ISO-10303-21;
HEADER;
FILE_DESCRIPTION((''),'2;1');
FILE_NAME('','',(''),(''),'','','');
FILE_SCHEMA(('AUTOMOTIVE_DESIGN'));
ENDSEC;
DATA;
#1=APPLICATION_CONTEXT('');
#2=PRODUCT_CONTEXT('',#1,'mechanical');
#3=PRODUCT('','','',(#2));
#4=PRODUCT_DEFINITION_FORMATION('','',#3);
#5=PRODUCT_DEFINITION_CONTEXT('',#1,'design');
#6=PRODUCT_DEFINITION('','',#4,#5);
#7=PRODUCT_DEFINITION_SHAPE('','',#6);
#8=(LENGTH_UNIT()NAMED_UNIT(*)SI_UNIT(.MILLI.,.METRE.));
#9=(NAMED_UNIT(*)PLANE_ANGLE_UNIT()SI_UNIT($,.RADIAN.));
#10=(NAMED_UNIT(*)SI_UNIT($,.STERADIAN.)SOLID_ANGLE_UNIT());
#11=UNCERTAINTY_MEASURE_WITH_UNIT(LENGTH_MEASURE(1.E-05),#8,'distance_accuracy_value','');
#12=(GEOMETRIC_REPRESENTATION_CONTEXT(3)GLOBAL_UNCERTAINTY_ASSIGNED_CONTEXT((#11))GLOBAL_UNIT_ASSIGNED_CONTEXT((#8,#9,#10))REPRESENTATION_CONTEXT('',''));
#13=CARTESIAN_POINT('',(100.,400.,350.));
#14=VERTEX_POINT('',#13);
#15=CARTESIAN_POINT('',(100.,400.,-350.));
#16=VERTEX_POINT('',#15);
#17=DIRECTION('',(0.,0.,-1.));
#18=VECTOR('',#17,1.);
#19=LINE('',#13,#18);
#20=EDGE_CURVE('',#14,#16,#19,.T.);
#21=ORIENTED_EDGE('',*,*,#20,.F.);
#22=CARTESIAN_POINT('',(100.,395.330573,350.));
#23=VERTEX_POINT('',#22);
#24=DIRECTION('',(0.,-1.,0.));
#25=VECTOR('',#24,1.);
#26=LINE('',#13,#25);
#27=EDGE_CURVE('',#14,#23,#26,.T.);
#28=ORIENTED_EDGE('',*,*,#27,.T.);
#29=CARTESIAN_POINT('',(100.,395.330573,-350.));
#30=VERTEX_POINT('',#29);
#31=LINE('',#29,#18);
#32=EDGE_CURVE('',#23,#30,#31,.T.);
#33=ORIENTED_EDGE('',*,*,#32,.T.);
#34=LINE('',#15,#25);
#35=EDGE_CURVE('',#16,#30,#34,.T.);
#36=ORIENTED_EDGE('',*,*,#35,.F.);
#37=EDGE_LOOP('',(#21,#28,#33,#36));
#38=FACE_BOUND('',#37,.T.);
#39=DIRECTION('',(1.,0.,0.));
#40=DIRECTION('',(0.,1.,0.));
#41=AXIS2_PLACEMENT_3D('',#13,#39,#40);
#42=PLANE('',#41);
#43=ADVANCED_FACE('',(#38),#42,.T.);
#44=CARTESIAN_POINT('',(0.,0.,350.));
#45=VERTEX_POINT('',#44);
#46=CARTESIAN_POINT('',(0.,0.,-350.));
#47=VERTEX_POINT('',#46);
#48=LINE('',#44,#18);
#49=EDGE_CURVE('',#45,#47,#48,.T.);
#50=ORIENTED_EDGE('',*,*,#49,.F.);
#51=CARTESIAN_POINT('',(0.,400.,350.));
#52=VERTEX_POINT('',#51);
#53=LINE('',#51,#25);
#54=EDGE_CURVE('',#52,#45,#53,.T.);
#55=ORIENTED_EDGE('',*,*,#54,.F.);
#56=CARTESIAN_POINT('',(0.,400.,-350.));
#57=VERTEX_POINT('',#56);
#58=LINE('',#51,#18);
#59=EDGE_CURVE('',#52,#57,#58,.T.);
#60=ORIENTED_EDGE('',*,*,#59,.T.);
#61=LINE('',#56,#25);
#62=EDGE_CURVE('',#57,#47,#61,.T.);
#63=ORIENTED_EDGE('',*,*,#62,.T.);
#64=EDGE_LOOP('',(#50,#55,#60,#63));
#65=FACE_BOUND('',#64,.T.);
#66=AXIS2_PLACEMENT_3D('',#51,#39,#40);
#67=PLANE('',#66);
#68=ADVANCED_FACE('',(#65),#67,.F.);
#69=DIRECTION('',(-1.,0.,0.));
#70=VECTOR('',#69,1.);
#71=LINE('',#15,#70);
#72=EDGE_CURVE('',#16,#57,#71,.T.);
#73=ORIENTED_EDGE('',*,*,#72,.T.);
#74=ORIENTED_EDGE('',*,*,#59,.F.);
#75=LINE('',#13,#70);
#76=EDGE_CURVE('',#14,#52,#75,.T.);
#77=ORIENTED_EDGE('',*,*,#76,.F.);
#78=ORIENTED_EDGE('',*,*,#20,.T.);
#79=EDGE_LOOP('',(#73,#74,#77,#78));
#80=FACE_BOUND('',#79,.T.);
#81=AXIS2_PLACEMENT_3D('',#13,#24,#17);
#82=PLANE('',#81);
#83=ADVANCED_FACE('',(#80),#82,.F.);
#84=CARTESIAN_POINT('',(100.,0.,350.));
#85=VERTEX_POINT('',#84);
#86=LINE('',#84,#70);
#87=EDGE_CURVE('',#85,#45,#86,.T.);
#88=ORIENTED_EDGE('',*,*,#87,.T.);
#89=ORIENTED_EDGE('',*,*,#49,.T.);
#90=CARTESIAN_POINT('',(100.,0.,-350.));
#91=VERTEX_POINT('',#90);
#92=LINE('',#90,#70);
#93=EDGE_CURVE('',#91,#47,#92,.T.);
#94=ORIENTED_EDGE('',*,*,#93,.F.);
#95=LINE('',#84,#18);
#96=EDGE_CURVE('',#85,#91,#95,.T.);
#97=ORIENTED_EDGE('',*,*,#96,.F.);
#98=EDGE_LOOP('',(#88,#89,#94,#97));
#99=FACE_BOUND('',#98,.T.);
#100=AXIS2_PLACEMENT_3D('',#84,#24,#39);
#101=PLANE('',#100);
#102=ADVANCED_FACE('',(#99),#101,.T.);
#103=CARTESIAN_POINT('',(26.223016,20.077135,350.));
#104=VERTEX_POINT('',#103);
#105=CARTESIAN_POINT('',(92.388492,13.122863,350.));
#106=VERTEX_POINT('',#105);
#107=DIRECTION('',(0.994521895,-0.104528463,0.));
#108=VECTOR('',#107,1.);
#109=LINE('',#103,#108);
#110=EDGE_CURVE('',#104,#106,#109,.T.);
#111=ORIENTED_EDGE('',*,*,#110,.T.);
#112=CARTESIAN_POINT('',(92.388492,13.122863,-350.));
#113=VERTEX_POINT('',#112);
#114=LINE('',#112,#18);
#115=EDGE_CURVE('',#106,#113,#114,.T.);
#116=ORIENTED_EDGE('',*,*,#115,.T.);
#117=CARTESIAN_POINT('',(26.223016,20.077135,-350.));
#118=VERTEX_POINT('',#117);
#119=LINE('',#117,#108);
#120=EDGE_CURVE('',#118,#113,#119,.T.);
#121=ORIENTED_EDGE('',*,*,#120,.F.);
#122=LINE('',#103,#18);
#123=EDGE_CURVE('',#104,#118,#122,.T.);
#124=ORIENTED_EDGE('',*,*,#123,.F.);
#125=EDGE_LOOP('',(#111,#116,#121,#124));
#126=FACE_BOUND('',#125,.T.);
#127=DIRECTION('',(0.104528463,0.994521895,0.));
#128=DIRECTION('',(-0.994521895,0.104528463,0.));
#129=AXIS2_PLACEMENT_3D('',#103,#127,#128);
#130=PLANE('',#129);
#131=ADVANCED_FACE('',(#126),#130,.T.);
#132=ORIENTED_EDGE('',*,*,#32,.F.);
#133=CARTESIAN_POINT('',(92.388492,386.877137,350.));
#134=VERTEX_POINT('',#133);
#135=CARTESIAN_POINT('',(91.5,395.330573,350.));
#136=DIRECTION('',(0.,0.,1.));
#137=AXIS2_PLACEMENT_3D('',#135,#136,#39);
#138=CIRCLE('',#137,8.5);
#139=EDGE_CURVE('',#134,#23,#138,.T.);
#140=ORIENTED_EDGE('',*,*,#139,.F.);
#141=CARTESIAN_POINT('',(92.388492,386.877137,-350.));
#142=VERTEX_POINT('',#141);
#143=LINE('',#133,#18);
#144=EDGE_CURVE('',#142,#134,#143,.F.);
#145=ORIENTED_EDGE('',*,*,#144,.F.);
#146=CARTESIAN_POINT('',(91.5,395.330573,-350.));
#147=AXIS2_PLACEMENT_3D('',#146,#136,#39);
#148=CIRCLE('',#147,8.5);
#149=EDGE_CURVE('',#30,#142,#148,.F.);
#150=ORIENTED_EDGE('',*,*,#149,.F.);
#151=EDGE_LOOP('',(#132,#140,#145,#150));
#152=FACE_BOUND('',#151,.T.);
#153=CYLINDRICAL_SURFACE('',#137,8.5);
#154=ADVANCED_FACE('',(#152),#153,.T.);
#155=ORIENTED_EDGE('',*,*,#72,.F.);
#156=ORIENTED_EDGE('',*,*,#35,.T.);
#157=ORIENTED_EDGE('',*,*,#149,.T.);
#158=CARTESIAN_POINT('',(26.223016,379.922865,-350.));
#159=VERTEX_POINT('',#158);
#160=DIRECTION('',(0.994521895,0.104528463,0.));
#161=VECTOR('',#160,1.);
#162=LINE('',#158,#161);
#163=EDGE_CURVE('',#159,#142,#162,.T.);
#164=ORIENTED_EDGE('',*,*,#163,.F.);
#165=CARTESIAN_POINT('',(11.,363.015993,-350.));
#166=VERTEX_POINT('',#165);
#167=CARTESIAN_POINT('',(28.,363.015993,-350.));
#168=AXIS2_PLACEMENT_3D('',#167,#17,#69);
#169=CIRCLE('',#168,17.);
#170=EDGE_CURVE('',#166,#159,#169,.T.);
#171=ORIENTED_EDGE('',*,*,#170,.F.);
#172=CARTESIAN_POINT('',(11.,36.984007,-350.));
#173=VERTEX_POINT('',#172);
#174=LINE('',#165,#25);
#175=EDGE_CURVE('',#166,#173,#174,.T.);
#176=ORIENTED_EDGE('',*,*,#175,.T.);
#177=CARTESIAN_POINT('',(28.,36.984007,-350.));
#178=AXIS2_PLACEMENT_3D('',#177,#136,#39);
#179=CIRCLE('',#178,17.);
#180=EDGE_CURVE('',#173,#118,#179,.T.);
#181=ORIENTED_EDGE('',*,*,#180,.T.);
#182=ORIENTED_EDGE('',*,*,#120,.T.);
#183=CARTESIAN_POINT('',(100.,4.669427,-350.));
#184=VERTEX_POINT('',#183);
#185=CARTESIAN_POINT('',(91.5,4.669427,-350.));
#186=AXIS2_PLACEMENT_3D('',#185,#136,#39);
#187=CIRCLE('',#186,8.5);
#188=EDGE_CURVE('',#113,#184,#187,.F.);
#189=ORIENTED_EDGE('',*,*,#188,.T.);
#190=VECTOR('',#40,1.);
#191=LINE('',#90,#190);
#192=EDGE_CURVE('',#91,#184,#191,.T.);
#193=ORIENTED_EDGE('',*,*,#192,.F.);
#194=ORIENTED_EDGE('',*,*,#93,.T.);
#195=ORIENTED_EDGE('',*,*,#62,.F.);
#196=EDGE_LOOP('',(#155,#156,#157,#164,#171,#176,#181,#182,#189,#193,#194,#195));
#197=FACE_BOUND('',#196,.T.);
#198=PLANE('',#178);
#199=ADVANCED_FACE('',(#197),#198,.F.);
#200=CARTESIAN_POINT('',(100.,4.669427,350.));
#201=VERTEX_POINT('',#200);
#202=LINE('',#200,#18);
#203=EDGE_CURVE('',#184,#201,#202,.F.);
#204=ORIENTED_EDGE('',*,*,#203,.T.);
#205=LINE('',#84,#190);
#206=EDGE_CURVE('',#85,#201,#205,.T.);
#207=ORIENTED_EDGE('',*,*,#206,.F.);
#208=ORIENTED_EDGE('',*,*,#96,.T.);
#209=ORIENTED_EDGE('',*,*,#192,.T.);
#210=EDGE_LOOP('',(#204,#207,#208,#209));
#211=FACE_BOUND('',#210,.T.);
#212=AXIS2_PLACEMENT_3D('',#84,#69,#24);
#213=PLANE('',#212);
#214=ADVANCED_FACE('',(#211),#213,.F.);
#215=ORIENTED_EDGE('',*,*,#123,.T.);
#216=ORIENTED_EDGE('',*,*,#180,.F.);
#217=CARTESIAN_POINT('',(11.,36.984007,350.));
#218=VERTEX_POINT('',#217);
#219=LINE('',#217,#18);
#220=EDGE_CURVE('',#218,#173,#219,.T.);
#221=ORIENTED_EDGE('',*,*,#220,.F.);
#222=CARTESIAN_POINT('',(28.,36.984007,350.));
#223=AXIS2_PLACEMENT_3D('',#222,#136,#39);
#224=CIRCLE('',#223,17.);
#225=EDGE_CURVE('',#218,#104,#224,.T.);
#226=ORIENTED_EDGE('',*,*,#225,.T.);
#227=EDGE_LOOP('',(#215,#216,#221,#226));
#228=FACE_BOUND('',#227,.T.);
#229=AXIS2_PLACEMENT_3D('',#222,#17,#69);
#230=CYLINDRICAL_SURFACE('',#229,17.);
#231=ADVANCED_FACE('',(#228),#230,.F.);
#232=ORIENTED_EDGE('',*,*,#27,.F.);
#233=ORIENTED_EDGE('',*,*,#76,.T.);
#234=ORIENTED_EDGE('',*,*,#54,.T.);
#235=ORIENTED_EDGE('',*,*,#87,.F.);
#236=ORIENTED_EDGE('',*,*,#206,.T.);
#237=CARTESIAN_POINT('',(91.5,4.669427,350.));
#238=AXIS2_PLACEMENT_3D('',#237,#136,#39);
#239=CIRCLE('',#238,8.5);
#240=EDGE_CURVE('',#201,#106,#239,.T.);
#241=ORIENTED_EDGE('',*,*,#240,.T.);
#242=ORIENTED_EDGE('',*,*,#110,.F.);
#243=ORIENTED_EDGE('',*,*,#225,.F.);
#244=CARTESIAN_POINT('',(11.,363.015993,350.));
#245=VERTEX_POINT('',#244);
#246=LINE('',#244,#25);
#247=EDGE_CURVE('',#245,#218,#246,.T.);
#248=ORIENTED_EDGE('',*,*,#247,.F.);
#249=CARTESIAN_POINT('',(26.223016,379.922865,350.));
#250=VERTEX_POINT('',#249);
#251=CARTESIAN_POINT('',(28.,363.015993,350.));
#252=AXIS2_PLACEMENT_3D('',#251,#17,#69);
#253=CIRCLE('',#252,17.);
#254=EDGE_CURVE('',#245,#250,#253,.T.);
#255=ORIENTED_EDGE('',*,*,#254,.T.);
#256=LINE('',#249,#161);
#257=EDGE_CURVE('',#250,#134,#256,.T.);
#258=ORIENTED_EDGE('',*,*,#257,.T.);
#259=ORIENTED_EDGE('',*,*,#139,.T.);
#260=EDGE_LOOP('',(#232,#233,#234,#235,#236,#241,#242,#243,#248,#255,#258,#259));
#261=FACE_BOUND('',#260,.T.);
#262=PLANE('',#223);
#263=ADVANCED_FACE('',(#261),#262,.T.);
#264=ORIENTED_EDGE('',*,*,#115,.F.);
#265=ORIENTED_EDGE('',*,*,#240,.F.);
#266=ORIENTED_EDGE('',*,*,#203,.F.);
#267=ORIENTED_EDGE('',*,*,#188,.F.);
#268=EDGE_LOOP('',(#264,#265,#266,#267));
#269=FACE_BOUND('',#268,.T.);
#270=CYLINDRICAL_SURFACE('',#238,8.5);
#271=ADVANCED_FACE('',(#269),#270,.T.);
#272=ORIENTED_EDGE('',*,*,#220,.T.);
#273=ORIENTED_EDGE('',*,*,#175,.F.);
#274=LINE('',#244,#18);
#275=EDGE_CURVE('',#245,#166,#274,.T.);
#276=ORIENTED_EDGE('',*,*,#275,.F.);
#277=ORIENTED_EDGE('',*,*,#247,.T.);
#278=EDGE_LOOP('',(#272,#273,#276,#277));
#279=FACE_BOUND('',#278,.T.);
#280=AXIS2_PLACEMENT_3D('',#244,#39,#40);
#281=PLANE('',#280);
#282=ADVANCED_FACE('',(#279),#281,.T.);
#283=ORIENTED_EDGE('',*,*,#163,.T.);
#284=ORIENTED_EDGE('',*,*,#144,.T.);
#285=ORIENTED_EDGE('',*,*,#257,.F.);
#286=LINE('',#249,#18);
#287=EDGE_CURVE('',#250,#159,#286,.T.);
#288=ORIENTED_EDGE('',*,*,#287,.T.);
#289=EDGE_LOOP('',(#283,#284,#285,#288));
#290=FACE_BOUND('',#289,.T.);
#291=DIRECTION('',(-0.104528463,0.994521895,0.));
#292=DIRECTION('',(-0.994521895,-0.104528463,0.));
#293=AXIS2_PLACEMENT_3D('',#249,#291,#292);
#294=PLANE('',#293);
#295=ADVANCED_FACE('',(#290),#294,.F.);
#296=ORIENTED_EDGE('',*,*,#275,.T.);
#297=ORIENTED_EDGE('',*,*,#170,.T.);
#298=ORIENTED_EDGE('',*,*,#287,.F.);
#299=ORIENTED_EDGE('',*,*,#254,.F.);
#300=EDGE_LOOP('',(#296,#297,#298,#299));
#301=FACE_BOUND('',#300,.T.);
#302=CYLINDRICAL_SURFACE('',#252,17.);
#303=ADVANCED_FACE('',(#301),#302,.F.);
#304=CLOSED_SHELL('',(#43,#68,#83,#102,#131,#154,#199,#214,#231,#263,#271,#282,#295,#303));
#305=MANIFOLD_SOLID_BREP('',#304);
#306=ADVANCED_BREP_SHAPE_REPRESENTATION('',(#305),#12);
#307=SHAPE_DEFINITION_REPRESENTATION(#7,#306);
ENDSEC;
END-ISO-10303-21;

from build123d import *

# Parameters (mm, degrees)
BASEMCHANNEL_START = -350
BASEMCHANNEL_DEPTH = 700
TOEFILLET_R        = 8.5


# Read off the part's stored shape, not the designer's step: BaseMchannel
with BuildPart() as part:
    # BaseMchannel outline → BaseMchannel (new body)
    with BuildSketch(Plane.XY.offset(BASEMCHANNEL_START)):
        with BuildLine():
            Line((0, 400), (0, 0))
            Line((0, 0), (100, 0))
            Line((100, 0), (100, 12.322861527))
            Line((100, 12.322861527), (26.223016124, 20.077134998))
            ThreePointArc((26.223016124, 20.077134998), (15.366537967, 25.608786911), (11, 36.984007219))
            Line((11, 36.984007219), (11, 363.015992781))
            ThreePointArc((11, 363.015992781), (15.366537967, 374.391213089), (26.223016124, 379.922865002))
            Line((26.223016124, 379.922865002), (100, 387.677138473))
            Line((100, 387.677138473), (100, 400))
            Line((100, 400), (0, 400))
        make_face()
    extrude(amount=BASEMCHANNEL_DEPTH)

    # ToeFillet
    toefillet_edges = [part.edges().sort_by_distance(p)[0] for p in [
        (100, 387.677138473, 0),
        (100, 12.322861527, 0),
    ]]
    fillet(toefillet_edges, radius=TOEFILLET_R)


solid = part.part
